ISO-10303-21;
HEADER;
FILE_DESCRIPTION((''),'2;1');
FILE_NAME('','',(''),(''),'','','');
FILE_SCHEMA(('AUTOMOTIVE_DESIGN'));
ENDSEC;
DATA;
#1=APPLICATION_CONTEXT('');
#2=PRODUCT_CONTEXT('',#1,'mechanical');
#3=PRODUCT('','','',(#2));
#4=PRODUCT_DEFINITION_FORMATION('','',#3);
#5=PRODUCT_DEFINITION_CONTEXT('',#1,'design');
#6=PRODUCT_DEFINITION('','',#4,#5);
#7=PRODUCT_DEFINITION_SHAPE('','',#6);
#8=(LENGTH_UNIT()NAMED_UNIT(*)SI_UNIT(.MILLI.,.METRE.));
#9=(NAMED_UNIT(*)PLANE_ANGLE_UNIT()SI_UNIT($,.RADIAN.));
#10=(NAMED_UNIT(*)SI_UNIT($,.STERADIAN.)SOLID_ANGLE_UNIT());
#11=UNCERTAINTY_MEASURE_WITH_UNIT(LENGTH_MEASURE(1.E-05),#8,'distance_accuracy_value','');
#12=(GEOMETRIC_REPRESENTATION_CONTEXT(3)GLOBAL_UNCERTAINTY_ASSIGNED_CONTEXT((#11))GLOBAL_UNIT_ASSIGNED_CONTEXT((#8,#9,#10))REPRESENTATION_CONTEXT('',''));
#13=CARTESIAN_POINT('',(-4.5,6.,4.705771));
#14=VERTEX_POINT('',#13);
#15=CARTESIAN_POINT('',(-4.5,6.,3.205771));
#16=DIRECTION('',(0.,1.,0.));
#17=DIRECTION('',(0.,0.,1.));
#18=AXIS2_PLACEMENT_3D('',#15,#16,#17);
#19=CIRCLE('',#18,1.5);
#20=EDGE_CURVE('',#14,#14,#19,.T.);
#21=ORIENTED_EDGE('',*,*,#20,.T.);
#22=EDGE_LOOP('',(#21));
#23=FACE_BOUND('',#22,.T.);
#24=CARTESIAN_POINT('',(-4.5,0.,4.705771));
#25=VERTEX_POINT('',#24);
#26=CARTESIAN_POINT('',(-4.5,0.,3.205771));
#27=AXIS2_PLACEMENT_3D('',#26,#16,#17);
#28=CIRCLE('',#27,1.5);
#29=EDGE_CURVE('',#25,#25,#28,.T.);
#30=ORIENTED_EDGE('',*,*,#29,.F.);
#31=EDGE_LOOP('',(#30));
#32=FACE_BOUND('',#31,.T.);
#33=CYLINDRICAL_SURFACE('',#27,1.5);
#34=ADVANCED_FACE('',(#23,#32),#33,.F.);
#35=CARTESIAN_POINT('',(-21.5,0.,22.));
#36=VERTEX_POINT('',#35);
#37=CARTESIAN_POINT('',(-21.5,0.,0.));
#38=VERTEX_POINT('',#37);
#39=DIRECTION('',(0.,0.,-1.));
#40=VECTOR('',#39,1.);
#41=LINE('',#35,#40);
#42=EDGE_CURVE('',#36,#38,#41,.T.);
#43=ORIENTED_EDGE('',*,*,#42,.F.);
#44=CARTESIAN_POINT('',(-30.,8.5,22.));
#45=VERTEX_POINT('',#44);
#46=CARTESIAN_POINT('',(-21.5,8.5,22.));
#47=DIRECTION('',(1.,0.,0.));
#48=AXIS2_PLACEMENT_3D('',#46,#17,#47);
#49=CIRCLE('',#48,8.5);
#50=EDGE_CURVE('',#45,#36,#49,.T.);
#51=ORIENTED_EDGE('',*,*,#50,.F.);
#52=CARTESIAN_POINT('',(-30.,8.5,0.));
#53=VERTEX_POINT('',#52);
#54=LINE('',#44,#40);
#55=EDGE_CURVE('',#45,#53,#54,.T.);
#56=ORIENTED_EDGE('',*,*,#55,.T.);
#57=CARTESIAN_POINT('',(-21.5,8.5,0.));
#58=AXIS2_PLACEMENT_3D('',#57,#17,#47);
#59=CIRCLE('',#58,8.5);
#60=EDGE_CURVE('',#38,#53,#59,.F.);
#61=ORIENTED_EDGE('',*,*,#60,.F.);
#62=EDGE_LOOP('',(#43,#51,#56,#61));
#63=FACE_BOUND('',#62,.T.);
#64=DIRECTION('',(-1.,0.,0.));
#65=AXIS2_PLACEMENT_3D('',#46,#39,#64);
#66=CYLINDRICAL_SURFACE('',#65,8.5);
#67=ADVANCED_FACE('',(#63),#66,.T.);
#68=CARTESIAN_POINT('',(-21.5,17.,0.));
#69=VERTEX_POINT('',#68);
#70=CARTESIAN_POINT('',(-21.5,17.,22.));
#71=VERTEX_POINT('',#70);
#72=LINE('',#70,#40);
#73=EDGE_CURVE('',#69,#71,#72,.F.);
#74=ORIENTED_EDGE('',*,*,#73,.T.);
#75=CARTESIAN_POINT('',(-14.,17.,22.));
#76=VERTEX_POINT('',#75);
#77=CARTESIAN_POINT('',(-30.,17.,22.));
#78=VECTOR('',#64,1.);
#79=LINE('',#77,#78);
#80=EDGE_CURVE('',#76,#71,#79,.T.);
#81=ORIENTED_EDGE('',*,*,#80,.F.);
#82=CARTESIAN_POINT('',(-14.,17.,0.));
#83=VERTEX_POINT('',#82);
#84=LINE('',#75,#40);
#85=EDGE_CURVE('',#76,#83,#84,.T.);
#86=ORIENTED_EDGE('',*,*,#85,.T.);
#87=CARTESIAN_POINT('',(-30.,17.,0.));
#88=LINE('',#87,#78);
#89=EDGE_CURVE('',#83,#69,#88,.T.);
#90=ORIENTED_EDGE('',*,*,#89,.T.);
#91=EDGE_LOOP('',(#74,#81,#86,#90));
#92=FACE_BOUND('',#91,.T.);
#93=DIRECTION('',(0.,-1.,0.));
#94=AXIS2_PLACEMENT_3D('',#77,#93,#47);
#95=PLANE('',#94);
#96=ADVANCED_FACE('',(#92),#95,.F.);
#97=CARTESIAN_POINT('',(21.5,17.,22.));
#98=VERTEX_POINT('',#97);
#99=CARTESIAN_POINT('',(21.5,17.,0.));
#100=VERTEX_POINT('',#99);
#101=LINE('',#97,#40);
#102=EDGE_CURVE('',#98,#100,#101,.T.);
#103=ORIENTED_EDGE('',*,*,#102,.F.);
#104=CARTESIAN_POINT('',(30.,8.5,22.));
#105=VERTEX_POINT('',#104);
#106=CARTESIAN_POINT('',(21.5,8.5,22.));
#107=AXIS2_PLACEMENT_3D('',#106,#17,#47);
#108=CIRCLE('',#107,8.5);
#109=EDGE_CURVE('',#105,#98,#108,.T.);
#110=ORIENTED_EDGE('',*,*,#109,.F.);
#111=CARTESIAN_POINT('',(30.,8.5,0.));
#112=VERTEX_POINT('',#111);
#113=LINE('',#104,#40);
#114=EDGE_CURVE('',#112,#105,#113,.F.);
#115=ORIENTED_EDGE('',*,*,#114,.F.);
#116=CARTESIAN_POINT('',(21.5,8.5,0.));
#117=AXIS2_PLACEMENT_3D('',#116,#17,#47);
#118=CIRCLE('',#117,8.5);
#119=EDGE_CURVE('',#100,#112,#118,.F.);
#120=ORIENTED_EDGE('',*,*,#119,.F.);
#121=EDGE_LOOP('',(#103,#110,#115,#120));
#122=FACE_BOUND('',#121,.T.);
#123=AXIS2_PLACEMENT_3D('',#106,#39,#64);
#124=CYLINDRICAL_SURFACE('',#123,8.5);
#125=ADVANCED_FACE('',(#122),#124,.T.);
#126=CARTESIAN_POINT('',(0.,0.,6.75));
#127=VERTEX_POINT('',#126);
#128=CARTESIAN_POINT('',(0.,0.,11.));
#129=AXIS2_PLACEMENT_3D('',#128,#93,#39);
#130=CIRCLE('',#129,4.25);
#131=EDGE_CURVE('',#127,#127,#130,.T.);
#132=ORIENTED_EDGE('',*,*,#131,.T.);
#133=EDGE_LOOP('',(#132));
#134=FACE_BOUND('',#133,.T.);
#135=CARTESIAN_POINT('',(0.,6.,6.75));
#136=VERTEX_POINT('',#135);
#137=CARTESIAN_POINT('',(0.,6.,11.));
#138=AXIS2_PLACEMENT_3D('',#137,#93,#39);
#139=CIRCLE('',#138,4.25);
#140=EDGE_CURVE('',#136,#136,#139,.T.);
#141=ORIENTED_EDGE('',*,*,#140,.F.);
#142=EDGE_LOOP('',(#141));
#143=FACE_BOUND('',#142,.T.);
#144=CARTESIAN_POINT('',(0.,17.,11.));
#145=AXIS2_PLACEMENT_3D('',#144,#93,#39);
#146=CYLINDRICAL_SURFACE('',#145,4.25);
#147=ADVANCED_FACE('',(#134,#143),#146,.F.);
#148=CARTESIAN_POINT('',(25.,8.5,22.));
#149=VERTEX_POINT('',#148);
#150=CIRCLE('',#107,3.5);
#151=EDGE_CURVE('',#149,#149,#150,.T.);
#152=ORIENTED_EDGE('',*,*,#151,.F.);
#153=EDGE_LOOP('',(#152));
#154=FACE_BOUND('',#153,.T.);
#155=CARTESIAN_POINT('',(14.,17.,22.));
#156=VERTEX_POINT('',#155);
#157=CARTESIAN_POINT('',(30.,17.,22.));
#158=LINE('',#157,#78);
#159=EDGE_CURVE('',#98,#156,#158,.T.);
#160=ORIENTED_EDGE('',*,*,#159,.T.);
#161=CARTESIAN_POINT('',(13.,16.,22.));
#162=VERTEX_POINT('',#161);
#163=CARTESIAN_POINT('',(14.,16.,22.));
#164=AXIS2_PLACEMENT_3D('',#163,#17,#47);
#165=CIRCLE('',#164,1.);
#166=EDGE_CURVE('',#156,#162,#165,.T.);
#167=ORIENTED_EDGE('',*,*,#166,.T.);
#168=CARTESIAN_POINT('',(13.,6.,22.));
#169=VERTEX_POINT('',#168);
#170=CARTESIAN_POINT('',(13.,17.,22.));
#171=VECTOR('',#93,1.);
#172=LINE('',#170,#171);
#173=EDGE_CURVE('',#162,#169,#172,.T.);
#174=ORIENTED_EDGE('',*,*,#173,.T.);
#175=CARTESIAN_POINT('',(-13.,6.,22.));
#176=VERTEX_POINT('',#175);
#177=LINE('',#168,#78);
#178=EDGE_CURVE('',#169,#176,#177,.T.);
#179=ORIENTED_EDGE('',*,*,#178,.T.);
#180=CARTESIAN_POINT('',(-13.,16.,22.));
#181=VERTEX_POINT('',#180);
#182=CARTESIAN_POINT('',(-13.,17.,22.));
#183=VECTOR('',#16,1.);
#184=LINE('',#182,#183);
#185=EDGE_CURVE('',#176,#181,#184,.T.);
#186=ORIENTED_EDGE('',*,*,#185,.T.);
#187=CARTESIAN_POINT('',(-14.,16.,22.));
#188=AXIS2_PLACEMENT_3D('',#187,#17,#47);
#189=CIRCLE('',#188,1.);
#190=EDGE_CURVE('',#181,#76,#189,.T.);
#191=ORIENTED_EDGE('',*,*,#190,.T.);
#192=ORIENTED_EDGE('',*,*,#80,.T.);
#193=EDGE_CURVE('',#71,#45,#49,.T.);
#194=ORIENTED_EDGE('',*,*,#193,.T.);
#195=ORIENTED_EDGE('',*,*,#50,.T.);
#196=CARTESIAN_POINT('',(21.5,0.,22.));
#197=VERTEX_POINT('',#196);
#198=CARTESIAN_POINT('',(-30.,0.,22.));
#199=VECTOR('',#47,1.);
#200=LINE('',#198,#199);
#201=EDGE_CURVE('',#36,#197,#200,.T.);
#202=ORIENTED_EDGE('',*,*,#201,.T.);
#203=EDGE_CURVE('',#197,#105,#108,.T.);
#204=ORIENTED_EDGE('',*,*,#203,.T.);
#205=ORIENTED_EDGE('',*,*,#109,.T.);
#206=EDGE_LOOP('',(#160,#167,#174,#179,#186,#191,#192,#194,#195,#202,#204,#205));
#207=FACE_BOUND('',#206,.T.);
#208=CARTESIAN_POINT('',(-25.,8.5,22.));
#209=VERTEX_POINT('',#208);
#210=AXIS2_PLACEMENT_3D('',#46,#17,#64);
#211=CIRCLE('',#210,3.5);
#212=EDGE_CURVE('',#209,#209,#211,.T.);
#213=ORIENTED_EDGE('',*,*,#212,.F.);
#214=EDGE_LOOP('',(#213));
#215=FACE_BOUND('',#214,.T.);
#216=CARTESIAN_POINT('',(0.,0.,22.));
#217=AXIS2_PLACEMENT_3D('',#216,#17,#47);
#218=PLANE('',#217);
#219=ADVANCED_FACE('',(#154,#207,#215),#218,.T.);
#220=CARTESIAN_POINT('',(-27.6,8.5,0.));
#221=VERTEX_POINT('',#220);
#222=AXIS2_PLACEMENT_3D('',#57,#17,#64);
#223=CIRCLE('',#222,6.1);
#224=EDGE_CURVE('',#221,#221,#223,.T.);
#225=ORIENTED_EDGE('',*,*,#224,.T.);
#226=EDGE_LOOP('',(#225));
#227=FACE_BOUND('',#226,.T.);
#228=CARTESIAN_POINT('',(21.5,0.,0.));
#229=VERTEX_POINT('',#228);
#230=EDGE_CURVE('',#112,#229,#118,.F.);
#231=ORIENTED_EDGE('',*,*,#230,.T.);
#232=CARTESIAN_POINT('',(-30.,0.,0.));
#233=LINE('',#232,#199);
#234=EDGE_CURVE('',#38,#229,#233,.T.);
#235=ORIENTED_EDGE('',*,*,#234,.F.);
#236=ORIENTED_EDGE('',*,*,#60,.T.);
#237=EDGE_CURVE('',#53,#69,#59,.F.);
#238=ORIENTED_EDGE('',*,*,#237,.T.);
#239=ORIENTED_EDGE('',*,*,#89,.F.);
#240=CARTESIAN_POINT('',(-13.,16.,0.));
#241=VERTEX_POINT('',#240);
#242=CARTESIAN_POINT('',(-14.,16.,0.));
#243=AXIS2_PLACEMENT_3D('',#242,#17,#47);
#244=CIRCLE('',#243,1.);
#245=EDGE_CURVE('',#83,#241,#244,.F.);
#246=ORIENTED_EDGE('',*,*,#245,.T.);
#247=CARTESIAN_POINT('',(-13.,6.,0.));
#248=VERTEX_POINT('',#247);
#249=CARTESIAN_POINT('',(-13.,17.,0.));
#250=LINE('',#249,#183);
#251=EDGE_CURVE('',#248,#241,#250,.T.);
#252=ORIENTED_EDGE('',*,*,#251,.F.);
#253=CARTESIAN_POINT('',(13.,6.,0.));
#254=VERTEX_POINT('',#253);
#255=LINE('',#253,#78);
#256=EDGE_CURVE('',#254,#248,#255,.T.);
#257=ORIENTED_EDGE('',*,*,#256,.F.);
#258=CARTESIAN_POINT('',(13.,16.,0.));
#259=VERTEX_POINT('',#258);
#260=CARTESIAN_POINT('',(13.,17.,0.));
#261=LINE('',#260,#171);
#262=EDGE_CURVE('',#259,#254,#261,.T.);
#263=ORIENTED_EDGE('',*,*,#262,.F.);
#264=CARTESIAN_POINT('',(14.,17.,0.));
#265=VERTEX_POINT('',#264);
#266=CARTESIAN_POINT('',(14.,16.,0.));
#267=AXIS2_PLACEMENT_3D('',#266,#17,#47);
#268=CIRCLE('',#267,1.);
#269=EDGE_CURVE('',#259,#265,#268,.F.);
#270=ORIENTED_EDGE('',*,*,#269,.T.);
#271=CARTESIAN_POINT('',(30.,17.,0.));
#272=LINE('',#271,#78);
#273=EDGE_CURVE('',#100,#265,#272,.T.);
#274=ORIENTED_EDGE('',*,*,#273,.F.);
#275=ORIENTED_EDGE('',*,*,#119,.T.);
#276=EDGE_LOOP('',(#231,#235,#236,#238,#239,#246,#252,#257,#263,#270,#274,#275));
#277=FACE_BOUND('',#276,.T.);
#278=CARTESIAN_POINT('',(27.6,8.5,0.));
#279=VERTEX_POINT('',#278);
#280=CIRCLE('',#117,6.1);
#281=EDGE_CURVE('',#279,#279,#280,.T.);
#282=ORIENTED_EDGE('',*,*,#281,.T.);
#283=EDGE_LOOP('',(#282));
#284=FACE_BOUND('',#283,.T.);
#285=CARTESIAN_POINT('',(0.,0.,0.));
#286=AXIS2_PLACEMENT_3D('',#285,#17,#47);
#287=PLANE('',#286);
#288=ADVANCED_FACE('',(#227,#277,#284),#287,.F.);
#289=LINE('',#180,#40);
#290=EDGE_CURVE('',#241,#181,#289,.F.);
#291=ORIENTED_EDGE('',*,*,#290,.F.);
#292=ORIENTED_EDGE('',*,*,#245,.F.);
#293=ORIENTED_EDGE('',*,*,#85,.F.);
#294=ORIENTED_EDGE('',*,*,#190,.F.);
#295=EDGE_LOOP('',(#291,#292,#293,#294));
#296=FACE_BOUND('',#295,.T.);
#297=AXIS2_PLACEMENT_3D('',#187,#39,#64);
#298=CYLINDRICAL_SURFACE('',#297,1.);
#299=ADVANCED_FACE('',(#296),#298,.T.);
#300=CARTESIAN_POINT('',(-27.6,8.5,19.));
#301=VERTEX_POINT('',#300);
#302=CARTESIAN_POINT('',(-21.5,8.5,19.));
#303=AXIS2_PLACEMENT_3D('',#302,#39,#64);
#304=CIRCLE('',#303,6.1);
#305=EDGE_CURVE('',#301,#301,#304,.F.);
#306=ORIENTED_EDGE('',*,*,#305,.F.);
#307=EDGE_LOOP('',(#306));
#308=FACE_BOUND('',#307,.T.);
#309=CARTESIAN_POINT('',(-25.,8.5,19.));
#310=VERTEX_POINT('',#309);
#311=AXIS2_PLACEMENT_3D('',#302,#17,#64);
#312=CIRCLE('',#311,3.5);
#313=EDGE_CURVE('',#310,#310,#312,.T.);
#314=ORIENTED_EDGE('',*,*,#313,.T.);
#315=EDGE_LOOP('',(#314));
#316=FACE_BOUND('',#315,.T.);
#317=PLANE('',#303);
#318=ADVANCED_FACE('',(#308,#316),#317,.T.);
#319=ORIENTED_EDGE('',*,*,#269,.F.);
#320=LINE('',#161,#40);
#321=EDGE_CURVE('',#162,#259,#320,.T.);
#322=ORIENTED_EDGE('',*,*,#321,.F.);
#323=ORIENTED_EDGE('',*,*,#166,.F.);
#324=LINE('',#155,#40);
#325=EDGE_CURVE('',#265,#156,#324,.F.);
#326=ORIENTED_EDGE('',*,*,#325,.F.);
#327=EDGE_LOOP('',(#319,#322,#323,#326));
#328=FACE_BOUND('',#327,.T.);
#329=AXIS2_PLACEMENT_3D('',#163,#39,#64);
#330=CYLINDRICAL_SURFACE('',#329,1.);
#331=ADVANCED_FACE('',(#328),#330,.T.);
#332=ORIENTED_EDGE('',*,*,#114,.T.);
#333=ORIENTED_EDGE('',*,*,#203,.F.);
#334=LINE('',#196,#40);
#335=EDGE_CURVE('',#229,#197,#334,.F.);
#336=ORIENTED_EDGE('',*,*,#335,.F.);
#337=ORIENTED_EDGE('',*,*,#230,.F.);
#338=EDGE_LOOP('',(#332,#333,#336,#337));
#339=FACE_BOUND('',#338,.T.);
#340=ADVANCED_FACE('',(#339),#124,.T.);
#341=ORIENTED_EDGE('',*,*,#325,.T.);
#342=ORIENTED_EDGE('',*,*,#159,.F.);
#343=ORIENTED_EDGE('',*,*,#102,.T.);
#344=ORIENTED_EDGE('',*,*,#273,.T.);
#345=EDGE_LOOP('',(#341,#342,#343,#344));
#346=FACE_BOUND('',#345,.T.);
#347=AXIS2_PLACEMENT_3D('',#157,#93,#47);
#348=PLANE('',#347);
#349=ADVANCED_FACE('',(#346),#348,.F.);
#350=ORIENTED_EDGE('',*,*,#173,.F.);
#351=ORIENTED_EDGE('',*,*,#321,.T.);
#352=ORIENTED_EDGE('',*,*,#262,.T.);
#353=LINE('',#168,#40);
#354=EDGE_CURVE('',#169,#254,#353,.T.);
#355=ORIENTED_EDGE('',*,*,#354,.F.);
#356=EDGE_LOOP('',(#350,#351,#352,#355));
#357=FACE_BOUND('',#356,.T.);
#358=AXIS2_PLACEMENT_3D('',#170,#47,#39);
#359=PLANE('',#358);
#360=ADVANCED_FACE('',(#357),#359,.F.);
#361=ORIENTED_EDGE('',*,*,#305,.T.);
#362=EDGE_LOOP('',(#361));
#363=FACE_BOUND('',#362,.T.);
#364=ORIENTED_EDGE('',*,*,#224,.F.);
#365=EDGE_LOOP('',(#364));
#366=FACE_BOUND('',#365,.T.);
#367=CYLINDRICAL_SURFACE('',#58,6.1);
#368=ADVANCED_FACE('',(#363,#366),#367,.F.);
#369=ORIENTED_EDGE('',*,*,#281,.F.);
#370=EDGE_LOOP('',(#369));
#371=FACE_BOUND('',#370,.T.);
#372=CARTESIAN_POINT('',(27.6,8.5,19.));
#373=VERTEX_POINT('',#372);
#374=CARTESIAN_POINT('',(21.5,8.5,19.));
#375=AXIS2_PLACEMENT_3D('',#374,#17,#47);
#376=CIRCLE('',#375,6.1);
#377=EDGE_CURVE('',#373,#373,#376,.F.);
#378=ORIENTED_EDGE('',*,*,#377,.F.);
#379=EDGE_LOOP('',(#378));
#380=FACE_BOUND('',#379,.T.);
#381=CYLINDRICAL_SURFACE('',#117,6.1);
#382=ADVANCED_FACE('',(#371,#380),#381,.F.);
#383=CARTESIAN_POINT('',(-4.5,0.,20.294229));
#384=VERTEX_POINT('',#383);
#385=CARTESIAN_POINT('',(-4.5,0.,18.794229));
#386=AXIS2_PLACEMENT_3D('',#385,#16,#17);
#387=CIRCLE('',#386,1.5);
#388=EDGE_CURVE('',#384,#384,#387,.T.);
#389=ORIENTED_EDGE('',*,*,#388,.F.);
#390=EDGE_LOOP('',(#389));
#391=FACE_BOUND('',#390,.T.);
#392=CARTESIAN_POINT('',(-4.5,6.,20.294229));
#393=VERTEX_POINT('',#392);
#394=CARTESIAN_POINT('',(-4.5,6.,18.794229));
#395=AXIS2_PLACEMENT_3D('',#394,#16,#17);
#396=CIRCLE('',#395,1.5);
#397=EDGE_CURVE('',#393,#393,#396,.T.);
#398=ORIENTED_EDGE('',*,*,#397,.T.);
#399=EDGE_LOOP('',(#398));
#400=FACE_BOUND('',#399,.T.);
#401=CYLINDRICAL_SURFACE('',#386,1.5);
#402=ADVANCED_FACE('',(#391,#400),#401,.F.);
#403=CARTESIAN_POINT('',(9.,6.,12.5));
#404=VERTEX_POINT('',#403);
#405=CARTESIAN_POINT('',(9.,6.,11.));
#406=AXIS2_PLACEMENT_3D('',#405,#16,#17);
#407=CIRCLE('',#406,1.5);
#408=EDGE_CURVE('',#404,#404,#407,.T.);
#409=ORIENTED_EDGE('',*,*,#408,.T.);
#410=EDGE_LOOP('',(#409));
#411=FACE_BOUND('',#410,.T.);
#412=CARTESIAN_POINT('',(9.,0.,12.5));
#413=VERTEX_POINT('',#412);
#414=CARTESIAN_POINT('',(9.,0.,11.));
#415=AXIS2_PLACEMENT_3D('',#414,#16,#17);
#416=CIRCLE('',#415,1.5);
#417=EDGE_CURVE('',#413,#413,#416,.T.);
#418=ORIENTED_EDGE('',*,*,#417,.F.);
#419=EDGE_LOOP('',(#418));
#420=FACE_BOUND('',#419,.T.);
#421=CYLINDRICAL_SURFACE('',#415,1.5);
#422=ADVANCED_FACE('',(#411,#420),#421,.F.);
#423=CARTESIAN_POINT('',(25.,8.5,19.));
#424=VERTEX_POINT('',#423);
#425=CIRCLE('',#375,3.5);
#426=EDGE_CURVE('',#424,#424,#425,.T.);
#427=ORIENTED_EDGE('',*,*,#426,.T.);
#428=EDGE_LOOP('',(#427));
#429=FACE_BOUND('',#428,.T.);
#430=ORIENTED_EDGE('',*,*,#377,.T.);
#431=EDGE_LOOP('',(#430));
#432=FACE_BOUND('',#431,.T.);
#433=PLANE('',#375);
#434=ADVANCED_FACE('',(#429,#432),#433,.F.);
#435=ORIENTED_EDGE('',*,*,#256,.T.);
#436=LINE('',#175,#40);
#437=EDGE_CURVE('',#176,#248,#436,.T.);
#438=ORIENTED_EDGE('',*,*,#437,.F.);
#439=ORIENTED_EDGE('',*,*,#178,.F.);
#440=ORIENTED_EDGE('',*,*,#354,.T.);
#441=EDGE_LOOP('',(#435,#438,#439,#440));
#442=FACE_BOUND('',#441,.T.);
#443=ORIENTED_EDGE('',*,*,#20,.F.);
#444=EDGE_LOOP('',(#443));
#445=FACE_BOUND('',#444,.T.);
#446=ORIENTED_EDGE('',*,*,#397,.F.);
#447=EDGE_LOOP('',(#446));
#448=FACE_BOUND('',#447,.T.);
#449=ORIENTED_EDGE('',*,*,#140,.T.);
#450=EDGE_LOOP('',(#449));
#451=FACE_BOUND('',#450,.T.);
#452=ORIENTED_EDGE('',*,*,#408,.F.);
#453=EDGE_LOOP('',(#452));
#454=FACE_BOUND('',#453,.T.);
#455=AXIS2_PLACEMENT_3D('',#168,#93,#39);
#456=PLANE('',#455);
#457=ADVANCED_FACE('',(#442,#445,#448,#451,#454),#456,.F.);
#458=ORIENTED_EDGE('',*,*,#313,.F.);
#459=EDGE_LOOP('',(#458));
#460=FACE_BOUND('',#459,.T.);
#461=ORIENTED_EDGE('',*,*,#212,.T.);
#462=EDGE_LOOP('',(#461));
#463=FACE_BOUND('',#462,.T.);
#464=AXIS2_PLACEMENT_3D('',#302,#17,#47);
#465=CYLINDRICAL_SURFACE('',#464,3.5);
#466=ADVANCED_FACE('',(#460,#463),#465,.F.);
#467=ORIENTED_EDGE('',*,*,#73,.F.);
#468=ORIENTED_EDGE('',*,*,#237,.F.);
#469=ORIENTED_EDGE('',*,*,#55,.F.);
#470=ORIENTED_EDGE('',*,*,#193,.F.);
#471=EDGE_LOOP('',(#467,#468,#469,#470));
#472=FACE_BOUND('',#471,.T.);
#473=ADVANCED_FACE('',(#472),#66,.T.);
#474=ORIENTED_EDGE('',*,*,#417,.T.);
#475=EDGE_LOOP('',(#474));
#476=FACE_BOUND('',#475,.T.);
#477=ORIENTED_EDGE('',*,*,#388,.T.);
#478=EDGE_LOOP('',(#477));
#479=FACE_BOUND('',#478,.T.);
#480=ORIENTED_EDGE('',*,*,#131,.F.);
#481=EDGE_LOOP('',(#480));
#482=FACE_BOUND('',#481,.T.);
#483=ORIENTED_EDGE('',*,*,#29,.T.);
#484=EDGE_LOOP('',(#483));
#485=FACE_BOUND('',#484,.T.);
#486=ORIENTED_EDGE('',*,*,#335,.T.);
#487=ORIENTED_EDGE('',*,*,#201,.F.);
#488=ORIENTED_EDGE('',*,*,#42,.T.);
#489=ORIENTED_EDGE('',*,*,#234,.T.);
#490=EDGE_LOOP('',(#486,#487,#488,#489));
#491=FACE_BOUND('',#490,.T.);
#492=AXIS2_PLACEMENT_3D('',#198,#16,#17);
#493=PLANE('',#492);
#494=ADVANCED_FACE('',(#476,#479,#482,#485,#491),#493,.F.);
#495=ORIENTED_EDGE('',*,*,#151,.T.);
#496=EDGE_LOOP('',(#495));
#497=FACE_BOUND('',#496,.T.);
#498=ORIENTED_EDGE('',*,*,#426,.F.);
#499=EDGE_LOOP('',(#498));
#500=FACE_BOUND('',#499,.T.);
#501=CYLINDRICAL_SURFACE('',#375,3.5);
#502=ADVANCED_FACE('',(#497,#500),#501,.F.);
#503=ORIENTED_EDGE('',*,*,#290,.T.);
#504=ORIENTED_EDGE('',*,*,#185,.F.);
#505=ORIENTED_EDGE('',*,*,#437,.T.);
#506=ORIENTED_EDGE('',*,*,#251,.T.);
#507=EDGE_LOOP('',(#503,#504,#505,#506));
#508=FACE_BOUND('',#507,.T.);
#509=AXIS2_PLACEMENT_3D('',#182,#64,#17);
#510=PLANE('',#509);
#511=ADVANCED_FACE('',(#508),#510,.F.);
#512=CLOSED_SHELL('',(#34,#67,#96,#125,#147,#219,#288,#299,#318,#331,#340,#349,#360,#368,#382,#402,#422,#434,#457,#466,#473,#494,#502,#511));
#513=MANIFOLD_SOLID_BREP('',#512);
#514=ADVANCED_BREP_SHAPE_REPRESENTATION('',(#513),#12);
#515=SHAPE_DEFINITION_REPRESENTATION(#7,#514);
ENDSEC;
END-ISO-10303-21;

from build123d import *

# Parameters (mm, degrees)
BOSS_EXTRU_1_DEPTH      = 22
ESQUISSE3_R             = 6.1
ENL_V_MAT_EXTRU_1_DEPTH = 41.902322672
ESQUISSE4_R             = 4.25
ENL_V_MAT_EXTRU_2_DEPTH = 41.902322672
CONG_1_R                = 8.5
ESQUISSE5_R             = 1.5
ENL_V_MAT_EXTRU_3_DEPTH = 39.794329483
ESQUISSE6_R             = 6.25
ESQUISSE6_R_2           = 3.5
BOSS_EXTRU_2_DEPTH      = 3
CONG_2_R                = 1


with BuildPart() as part:
    # Esquisse2 → Boss.-Extru.1 (new body)
    with BuildSketch(Plane.XY):
        Polygon((-30, 0), (30, 0), (30, 17), (13, 17), (13, 6), (-13, 6), (-13, 17), (-30, 17), align=None)
    extrude(amount=BOSS_EXTRU_1_DEPTH)

    # Esquisse3 → Enlèv. mat.-Extru.1 (cut, through all)
    with BuildSketch(Plane.XY.offset(22)):
        with Locations((21.5, 8.5)):
            Circle(ESQUISSE3_R)
        with Locations(Location((-21.5, 8.5, 0), (0, 0, 180))):
            Circle(ESQUISSE3_R)
    extrude(amount=-ENL_V_MAT_EXTRU_1_DEPTH, mode=Mode.SUBTRACT)

    # Esquisse4 → Enlèv. mat.-Extru.2 (cut, through all)
    with BuildSketch(Plane(origin=(0, 0, 0), x_dir=(-1, 0, 0), z_dir=(0, -1, 0))):
        with Locations(Location((0, -11, 0), (0, 0, 90))):
            Circle(ESQUISSE4_R)
    extrude(amount=-ENL_V_MAT_EXTRU_2_DEPTH, mode=Mode.SUBTRACT)

    # Congé1
    cong_1_edges = [part.edges().sort_by_distance(p)[0] for p in [
        (30, 0, 11),
        (30, 17, 11),
        (-30, 0, 11),
        (-30, 17, 11),
    ]]
    fillet(cong_1_edges, radius=CONG_1_R - 0.0001)  # a hair under: the kernel refuses the full size

    # Esquisse5 → Enlèv. mat.-Extru.3 (cut, through all)
    with BuildSketch(Plane(origin=(0, 6, 0), x_dir=(1, 0, 0), z_dir=(0, 1, 0))):
        with Locations(Location((9, -11, 0), (0, 0, 270))):
            Circle(ESQUISSE5_R)
        with Locations(Location((-4.5, -18.794228634, 0), (0, 0, 270))):
            Circle(ESQUISSE5_R)
        with Locations(Location((-4.5, -3.205771366, 0), (0, 0, 270))):
            Circle(ESQUISSE5_R)
    extrude(amount=-ENL_V_MAT_EXTRU_3_DEPTH, mode=Mode.SUBTRACT)

    # Esquisse6 → Boss.-Extru.2 (add)
    # profile 1 of 2: a face of its own
    with BuildSketch(Plane.XY.offset(22)):
        with Locations((21.5, 8.5)):
            Circle(ESQUISSE6_R)
        with Locations((21.5, 8.5)):
            Circle(ESQUISSE6_R_2, mode=Mode.SUBTRACT)
    # profile 2 of 2: a face of its own
    with BuildSketch(Plane.XY.offset(22)):
        with Locations((-21.5, 8.5)):
            Circle(ESQUISSE6_R)
        with Locations(Location((-21.5, 8.5, 0), (0, 0, 180))):
            Circle(ESQUISSE6_R_2, mode=Mode.SUBTRACT)
    extrude(amount=-BOSS_EXTRU_2_DEPTH)

    # Congé2
    cong_2_edges = [part.edges().sort_by_distance(p)[0] for p in [
        (13, 17, 11),
        (-13, 17, 11),
    ]]
    fillet(cong_2_edges, radius=CONG_2_R)


solid = part.part
